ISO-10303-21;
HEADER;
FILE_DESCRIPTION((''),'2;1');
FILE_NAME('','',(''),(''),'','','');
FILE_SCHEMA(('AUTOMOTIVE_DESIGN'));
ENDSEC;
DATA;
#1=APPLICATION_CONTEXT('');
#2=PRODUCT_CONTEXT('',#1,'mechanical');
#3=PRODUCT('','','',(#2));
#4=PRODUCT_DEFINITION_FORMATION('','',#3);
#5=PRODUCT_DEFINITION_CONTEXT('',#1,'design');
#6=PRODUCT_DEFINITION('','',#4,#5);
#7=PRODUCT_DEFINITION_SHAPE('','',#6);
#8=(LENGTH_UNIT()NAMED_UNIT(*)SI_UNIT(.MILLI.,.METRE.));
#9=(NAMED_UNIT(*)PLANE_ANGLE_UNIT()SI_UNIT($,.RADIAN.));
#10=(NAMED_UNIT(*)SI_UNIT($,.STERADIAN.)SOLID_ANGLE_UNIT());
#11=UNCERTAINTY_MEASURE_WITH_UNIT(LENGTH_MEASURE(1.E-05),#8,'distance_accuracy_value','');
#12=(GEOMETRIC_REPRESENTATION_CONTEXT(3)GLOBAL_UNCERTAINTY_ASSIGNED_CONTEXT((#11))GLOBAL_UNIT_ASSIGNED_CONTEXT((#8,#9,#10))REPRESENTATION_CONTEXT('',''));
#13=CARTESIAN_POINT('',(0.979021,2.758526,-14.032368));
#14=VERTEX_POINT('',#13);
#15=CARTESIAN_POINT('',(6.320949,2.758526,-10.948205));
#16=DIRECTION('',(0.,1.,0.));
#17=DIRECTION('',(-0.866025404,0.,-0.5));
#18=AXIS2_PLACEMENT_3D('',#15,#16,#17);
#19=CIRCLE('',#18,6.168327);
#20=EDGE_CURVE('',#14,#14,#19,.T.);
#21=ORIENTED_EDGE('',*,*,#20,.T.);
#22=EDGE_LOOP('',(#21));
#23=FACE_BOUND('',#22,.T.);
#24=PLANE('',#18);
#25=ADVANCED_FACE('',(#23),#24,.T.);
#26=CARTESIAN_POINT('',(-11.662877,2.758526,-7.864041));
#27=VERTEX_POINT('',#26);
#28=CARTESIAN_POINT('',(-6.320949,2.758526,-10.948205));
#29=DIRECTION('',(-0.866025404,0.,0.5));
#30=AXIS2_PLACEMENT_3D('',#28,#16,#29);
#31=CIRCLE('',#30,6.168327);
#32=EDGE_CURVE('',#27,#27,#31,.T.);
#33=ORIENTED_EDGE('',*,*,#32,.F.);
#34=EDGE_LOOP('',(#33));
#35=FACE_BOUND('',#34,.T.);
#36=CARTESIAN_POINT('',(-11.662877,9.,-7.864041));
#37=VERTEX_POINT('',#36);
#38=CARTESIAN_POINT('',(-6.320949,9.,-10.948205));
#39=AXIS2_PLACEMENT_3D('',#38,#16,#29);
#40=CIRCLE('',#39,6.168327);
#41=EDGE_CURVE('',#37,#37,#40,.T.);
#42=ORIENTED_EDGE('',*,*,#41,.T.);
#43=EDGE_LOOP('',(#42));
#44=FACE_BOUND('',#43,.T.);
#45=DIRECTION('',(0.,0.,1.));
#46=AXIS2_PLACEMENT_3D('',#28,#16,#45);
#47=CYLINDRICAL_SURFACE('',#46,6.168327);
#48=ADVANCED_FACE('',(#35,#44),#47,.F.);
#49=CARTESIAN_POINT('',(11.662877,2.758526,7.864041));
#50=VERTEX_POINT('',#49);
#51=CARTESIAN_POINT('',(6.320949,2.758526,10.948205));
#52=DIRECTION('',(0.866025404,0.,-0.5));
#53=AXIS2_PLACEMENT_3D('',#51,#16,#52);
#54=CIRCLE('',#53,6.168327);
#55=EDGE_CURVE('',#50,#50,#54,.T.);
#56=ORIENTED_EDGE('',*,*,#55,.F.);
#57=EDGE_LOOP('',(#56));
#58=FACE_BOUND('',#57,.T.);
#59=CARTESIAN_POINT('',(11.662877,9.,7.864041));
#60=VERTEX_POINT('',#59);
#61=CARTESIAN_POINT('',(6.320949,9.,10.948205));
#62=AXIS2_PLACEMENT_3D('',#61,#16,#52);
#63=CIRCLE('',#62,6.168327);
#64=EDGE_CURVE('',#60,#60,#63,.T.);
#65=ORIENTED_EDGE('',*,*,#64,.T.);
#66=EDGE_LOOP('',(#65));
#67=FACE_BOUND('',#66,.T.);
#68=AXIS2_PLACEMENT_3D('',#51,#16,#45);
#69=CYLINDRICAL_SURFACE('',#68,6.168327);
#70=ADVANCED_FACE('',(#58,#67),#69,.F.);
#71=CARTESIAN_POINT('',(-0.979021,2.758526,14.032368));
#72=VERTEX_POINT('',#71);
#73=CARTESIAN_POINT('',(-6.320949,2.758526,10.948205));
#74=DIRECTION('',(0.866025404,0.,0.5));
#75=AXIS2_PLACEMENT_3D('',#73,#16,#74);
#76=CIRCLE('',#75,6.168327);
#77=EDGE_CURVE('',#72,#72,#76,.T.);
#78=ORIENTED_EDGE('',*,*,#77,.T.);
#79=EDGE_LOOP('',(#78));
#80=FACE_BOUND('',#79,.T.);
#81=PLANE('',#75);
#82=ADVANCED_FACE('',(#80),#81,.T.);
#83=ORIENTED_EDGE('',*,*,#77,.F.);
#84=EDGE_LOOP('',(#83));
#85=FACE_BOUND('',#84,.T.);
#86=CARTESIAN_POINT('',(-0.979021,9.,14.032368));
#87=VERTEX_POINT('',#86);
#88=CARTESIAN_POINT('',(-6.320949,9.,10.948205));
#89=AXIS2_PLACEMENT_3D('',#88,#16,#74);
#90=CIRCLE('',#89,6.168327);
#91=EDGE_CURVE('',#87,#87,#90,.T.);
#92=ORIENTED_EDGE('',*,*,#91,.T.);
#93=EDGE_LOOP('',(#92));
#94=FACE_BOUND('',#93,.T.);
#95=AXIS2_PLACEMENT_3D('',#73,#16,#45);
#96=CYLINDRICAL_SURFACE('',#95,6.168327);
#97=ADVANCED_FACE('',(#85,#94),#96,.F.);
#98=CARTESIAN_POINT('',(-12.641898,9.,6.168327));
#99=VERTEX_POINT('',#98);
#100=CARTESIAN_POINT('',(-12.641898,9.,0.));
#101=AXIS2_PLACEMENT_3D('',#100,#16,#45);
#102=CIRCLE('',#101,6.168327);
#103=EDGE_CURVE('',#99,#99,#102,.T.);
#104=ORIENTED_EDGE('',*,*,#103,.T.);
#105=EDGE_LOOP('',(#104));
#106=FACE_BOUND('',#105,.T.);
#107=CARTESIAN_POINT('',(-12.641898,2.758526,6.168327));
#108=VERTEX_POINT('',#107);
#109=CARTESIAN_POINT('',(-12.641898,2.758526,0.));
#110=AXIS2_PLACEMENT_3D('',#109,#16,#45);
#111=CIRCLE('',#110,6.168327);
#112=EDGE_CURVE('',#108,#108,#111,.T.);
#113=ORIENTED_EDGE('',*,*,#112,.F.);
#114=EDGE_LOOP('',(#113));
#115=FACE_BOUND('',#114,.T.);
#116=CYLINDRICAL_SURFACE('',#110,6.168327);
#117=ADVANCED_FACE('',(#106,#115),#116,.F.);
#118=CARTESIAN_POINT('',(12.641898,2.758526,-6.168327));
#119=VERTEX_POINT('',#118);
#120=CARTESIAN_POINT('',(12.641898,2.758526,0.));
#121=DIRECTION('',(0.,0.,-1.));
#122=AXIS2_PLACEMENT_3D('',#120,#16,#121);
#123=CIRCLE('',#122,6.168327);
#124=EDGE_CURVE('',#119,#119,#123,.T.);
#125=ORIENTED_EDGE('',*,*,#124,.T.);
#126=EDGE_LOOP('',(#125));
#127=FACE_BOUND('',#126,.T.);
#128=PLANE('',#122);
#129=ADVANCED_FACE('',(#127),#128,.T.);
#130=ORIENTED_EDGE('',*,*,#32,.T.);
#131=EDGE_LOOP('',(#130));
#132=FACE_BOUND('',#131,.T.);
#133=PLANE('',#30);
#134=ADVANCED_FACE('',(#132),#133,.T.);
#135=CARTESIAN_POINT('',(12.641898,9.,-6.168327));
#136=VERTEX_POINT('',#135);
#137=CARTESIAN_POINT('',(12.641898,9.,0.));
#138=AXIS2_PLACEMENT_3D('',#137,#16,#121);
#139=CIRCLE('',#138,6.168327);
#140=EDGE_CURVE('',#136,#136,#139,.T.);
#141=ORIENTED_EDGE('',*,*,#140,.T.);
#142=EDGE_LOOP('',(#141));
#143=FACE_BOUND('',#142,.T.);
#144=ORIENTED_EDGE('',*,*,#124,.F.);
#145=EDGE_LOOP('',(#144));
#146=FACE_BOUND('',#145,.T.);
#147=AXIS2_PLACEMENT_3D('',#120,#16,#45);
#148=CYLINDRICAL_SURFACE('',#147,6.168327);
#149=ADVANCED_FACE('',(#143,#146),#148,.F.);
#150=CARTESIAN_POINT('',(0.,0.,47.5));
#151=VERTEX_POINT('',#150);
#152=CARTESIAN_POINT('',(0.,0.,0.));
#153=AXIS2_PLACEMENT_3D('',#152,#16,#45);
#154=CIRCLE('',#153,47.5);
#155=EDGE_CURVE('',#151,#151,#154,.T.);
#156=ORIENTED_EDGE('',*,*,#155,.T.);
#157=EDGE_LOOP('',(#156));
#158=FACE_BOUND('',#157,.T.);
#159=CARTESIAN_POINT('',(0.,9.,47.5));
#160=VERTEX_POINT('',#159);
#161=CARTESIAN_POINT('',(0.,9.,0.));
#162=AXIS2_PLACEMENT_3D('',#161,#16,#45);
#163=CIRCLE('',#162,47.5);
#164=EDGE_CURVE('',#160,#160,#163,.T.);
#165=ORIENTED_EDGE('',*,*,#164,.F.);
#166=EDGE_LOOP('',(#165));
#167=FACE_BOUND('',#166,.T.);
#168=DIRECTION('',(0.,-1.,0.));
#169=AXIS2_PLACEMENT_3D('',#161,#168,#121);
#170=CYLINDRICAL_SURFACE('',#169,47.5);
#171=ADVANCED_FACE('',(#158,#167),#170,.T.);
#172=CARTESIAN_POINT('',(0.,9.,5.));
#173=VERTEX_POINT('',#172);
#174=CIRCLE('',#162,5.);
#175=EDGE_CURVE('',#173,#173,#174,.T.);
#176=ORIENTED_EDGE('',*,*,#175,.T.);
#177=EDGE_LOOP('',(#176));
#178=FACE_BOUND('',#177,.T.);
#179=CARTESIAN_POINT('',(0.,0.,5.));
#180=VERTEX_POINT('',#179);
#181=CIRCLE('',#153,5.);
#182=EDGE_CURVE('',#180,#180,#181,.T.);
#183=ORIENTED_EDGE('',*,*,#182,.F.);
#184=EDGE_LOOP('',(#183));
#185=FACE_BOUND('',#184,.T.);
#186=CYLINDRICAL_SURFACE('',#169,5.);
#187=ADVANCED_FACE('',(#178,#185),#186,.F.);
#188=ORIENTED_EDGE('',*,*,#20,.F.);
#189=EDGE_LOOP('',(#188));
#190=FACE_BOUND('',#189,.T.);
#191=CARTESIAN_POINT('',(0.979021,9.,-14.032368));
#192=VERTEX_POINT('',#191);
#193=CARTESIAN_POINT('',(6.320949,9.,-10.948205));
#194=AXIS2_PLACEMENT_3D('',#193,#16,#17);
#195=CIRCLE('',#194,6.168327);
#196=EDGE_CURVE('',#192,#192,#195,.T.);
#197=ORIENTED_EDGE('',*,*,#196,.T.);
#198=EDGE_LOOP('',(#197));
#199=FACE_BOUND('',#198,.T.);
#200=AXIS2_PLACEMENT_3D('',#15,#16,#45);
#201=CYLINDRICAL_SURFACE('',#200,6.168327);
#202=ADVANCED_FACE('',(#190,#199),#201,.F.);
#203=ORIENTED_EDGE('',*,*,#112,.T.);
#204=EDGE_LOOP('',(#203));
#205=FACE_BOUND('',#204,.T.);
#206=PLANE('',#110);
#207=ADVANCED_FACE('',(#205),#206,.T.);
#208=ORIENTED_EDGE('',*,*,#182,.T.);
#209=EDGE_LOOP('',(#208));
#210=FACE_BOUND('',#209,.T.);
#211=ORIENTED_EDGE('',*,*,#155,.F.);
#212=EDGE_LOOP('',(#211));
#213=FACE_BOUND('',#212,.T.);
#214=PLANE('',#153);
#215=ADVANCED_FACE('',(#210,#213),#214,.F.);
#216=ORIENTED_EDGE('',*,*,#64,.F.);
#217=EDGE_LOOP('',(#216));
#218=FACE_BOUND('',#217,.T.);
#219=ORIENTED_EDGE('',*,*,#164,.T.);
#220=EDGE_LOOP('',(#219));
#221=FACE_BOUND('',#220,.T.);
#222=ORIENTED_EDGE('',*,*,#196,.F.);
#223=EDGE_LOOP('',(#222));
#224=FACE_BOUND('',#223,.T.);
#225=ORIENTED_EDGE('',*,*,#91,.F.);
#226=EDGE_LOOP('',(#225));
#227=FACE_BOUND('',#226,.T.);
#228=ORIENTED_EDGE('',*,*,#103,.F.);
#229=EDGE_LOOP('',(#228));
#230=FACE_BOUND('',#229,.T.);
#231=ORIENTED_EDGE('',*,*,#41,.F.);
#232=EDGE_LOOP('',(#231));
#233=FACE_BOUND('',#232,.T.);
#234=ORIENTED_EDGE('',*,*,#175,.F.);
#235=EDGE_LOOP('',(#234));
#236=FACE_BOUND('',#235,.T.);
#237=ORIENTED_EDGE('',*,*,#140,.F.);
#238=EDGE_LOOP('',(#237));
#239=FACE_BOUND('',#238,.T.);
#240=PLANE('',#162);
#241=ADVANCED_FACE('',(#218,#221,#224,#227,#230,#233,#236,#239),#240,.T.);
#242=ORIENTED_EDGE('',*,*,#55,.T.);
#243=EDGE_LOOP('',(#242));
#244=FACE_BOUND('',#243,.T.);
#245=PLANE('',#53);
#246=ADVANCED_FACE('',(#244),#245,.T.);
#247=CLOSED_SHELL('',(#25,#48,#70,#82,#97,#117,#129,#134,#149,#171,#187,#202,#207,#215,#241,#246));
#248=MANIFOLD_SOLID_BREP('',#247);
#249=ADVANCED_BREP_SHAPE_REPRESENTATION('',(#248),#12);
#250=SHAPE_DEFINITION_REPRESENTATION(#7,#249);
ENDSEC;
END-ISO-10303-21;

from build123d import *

# Parameters (mm, degrees)
SKETCH1_R           = 47.5
BOSS_EXTRUDE1_DEPTH = 9
SKETCH2_R           = 5
CUT_EXTRUDE1_DEPTH  = 68.775364256
SKETCH3_R           = 6.168326872
CUT_EXTRUDE2_DEPTH  = 6.24147409
CIRPATTERN1_COUNT   = 6


with BuildPart() as part:
    # Sketch1 → Boss-Extrude1 (new body)
    with BuildSketch(Plane(origin=(0, 0, 0), x_dir=(1, 0, 0), z_dir=(0, 1, 0))):
        Circle(SKETCH1_R)
    extrude(amount=BOSS_EXTRUDE1_DEPTH)

    # Sketch2 → Cut-Extrude1 (cut, through all)
    with BuildSketch(Plane(origin=(0, 0, 0), x_dir=(1, 0, 0), z_dir=(0, 1, 0))):
        Circle(SKETCH2_R)
    extrude(amount=CUT_EXTRUDE1_DEPTH, mode=Mode.SUBTRACT)

    # Sketch3 → Cut-Extrude2 (cut)
    with BuildSketch(Plane(origin=(0, 9, 0), x_dir=(1, 0, 0), z_dir=(0, 1, 0))):
        with Locations((-12.641897638, 0)):
            Circle(SKETCH3_R)
    cut_extrude2 = extrude(amount=-CUT_EXTRUDE2_DEPTH, mode=Mode.SUBTRACT)

    # CirPattern1: Cut-Extrude2 ×6 about axis
    cirpattern1_axis = Axis((0, 0, 0), (0, 1, 0))
    for i in range(1, CIRPATTERN1_COUNT):
        add(cut_extrude2.rotate(cirpattern1_axis, i * 360 / CIRPATTERN1_COUNT), mode=Mode.SUBTRACT)


solid = part.part
